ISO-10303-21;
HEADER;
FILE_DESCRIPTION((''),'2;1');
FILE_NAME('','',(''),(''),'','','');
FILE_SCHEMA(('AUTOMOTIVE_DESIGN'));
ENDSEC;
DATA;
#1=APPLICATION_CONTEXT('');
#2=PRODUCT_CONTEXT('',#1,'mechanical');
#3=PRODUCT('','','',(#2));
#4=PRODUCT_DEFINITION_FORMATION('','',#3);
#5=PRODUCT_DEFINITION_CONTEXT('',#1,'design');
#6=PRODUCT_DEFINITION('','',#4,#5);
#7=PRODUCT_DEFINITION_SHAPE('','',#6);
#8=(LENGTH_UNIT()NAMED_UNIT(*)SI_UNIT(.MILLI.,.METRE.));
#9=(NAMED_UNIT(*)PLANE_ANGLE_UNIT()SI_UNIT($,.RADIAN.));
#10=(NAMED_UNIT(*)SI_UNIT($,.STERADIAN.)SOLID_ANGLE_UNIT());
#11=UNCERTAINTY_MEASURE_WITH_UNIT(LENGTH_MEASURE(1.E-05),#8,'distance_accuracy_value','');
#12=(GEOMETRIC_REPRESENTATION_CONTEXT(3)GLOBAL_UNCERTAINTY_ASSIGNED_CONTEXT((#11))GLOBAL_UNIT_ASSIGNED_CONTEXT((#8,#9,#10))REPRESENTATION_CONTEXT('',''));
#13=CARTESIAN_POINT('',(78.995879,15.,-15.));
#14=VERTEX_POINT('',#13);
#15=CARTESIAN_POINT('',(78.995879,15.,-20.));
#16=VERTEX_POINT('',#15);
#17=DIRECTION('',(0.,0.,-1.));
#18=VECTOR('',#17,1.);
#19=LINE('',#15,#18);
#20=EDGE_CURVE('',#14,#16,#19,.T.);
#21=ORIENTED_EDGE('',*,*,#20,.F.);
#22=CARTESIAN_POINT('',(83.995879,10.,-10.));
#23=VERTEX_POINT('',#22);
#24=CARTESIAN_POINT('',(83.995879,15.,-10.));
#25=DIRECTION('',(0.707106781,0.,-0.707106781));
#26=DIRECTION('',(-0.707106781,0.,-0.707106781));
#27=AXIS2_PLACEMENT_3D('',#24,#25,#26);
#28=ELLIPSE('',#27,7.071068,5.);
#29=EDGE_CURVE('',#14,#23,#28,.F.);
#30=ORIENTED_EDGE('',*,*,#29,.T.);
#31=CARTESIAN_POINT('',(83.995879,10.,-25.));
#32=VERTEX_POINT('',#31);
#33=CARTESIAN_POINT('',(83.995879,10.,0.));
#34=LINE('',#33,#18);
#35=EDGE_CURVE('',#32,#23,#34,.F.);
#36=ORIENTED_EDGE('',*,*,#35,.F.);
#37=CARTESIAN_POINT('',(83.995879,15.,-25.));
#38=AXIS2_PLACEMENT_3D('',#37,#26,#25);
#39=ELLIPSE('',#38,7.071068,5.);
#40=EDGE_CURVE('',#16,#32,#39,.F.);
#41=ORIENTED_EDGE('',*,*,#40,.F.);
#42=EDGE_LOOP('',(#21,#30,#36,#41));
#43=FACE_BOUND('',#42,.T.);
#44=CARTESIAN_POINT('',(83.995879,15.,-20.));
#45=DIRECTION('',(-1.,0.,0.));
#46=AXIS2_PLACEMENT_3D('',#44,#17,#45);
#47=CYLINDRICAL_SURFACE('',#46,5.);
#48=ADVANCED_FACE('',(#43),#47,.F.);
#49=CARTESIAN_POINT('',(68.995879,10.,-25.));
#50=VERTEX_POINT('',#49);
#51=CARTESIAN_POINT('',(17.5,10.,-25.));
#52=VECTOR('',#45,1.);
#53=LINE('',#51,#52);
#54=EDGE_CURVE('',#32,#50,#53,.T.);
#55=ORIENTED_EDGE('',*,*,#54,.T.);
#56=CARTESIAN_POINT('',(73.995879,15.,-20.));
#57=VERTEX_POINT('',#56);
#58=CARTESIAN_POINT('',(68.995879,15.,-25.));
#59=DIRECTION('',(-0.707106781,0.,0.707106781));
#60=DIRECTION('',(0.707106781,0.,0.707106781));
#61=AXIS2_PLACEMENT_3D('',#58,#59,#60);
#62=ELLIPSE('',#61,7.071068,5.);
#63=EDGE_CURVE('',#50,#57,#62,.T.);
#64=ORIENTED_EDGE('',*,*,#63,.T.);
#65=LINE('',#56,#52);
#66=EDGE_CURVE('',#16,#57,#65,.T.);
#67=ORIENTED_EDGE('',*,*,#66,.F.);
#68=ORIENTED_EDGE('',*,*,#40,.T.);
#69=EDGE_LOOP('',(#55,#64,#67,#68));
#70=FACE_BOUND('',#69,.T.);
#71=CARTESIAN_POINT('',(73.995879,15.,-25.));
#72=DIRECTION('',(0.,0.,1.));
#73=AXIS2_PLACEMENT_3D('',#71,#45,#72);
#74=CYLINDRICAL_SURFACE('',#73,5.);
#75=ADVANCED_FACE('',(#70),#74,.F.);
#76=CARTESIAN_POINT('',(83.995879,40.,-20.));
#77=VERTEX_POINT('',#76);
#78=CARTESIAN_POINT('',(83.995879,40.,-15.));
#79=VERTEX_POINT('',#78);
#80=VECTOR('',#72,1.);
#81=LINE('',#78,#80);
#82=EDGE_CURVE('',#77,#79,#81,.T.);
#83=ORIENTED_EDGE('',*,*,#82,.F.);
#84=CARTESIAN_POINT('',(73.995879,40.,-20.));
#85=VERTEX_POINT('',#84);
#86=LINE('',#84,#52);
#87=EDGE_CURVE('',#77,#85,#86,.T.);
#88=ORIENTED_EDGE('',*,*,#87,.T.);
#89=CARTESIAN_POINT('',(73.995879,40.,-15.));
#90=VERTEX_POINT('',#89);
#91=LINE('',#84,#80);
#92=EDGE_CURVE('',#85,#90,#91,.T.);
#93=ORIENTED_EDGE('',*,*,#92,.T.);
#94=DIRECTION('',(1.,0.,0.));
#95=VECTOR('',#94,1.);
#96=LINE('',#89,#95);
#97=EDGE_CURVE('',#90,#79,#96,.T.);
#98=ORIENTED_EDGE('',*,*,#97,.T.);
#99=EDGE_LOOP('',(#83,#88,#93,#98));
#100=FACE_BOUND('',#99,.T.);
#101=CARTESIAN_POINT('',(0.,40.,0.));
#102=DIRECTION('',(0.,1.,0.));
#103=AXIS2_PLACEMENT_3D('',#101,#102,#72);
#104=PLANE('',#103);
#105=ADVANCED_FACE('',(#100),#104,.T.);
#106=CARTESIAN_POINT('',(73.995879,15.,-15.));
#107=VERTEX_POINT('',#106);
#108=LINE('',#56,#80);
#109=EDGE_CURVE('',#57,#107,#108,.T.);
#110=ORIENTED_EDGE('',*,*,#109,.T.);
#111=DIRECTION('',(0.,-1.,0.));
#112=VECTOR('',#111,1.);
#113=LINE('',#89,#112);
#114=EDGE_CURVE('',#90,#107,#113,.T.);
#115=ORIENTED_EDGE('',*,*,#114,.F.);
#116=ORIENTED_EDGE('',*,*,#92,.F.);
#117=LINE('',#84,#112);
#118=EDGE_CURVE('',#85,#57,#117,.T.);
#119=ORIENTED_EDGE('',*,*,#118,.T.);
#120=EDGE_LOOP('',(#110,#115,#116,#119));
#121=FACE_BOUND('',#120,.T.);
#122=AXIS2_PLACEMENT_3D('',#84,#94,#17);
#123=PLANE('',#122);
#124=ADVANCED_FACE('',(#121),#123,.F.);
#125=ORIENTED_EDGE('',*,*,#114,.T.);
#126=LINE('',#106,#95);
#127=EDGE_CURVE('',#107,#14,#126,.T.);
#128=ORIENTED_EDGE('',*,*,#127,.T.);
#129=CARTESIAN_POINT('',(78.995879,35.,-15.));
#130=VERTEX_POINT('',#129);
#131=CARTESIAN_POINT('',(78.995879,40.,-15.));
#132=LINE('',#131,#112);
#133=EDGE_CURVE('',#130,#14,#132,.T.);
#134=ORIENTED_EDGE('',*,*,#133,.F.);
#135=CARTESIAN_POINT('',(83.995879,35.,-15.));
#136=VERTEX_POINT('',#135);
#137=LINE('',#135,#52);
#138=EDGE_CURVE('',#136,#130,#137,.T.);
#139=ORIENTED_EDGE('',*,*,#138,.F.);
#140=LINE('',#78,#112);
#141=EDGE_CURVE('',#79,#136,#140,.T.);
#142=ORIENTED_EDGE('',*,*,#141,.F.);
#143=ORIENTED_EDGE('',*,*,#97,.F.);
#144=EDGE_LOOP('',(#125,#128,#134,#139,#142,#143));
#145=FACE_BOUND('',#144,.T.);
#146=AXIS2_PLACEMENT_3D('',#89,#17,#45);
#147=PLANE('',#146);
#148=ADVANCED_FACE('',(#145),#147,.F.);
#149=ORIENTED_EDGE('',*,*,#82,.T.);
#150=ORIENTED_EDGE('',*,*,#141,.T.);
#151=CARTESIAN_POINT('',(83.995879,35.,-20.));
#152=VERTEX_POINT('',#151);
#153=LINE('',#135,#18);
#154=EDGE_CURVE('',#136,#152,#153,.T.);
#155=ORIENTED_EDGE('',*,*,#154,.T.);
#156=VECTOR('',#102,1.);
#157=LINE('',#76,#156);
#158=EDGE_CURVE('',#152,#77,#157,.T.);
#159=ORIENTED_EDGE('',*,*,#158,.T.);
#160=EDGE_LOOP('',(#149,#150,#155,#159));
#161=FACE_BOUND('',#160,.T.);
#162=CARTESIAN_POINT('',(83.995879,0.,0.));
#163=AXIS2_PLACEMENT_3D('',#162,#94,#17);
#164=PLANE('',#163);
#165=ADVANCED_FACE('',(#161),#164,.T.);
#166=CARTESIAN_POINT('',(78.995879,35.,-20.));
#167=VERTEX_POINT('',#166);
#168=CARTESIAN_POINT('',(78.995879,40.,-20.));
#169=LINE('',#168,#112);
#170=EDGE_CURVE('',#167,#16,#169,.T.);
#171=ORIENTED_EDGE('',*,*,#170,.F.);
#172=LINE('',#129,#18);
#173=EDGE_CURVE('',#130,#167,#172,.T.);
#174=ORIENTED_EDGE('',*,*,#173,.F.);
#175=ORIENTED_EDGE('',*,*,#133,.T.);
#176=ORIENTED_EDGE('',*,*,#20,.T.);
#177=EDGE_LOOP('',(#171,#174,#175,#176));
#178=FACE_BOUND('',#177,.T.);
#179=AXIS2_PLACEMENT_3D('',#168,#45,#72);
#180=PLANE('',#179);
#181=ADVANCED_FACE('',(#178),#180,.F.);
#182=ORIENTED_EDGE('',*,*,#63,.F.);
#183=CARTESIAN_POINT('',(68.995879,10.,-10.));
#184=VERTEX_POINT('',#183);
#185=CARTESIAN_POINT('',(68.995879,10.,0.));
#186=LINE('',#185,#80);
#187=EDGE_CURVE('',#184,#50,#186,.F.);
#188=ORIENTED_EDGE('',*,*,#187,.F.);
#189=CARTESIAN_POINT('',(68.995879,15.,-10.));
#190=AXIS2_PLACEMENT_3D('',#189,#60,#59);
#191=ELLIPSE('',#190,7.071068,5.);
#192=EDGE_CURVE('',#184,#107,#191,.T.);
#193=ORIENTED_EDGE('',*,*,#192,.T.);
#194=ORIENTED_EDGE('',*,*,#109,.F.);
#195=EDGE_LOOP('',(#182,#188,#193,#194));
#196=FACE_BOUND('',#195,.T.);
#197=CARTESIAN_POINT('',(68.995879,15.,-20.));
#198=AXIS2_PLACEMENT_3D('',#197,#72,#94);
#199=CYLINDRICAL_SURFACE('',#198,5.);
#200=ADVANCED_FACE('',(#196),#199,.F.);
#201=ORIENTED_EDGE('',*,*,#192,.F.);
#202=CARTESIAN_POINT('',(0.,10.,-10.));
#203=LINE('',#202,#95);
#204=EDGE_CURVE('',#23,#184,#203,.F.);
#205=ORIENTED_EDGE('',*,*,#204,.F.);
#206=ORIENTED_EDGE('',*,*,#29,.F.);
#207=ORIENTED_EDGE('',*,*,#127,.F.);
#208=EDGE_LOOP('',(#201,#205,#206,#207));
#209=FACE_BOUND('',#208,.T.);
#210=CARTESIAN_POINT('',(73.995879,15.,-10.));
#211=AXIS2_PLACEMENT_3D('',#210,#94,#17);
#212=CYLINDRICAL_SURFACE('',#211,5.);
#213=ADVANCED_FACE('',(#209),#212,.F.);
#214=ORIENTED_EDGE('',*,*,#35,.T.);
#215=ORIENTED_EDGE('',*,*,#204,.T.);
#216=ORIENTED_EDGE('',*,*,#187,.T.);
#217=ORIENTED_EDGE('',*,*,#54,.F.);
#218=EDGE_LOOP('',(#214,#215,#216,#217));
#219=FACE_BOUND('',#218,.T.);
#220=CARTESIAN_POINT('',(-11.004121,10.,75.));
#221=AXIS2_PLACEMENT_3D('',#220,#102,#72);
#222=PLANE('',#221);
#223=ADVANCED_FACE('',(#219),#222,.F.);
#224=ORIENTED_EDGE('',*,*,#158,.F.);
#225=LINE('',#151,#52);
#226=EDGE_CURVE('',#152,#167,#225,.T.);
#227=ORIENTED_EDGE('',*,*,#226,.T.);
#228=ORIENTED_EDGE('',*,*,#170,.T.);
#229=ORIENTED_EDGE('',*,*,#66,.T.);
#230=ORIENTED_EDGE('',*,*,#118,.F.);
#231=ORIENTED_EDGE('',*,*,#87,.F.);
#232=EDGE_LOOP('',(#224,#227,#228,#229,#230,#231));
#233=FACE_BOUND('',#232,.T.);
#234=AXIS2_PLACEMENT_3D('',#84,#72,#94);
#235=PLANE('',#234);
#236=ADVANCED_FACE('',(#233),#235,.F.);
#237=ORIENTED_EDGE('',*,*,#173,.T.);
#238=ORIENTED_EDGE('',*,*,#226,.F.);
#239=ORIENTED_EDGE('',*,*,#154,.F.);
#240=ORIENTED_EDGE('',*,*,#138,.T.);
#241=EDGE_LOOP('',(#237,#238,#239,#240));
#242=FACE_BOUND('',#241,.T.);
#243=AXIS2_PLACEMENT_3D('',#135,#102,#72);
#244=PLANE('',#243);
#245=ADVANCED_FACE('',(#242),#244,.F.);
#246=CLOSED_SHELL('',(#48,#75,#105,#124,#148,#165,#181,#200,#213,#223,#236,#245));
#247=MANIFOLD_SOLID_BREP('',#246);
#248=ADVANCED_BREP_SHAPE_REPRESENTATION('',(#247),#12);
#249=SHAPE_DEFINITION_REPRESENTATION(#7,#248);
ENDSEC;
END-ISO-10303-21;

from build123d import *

# Parameters (mm, degrees)
SKETCH1_R           = 5
SKETCH1_R_2         = 10.05
BOSS_EXTRUDE1_DEPTH = 10
SKETCH2_R           = 1.25
CUT_EXTRUDE1_DEPTH  = 10
SKETCH4_R           = 7.5
BOSS_EXTRUDE2_DEPTH = 30
BOSS_EXTRUDE2_TAPER = 7
SKETCH5_R           = 1.25
CUT_EXTRUDE2_DEPTH  = 10
FILLET1_R           = 15
SKETCH6_W           = 5
SKETCH6_H           = 5
BOSS_EXTRUDE3_DEPTH = 30
SKETCH7_W           = 5
SKETCH7_H           = 5
BOSS_EXTRUDE4_DEPTH = 5
FILLET2_R           = 5
SKETCH8_W           = 100
SKETCH8_H           = 10
CUT_EXTRUDE4_DEPTH  = 100


# Some blends are built 0.0001 mm under size
with BuildPart() as part:
    # Sketch1 → Boss-Extrude1 (new body)
    with BuildSketch(Plane(origin=(0, 0, 0), x_dir=(1, 0, 0), z_dir=(0, 1, 0))):
        Polygon((23.995878661, -35), (56.995878661, -35), (56.995878661, -75), (88.995878661, -75), (88.995878661, -25), (88.995878661, 25), (17.5, 25), (-2.004121339, 25), (-2.004121339, 7.840472806), (23.995878661, 7.840472806), (23.995878661, 0), (23.995878661, -28.53803828), (10.495878661, -28.53803828), (10.495878661, -35), align=None)
        with Locations(Location((51.495878661, 0, 0), (0, 0, 270))):
            Circle(SKETCH1_R, mode=Mode.SUBTRACT)
        with Locations(Location((73.995878661, -60, 0), (0, 0, 270))):
            Circle(SKETCH1_R_2, mode=Mode.SUBTRACT)
    extrude(amount=BOSS_EXTRUDE1_DEPTH)

    # Sketch2 → Cut-Extrude1 (cut)
    with BuildSketch(Plane.ZY.offset(-10.495878661)):
        with Locations((31.76901914, 5)):
            Circle(SKETCH2_R)
    extrude(amount=-CUT_EXTRUDE1_DEPTH, mode=Mode.SUBTRACT)

    # Sketch4 → Boss-Extrude2 (add)
    with BuildSketch(Plane(origin=(0, 10, 0), x_dir=(1, 0, 0), z_dir=(0, 1, 0))):
        with Locations((6.495878661, 16.5)):
            Circle(SKETCH4_R)
    extrude(amount=BOSS_EXTRUDE2_DEPTH, taper=BOSS_EXTRUDE2_TAPER)

    # Sketch5 → Cut-Extrude2 (cut)
    with BuildSketch(Plane(origin=(0, 40, 0), x_dir=(1, 0, 0), z_dir=(0, 1, 0))):
        with Locations(Location((6.495878661, 16.5, 0), (0, 0, 270))):
            Circle(SKETCH5_R)
    extrude(amount=-CUT_EXTRUDE2_DEPTH, mode=Mode.SUBTRACT)

    # Fillet1
    # the kernel refuses this fillet: 15 mm, written as the material it adds along each edge
    with BuildSketch(Plane(origin=(56.995878661, 0, 35), x_dir=(-1, 0, 0), z_dir=(0, 1, 0)), Plane(origin=(23.995878661, 0, -7.840472806), x_dir=(-1, 0, 0), z_dir=(0, 1, 0))) as fillet1_piece_1:
        with BuildLine():
            CenterArc((FILLET1_R, FILLET1_R), FILLET1_R, 180, 90)
            Line((0, FILLET1_R), (-FILLET1_R * 0.02, FILLET1_R))
            Line((-FILLET1_R * 0.02, FILLET1_R), (-FILLET1_R * 0.02, -FILLET1_R * 0.02))
            Line((-FILLET1_R * 0.02, -FILLET1_R * 0.02), (FILLET1_R, -FILLET1_R * 0.02))
            Line((FILLET1_R, -FILLET1_R * 0.02), (FILLET1_R, 0))
        make_face()
    extrude(amount=10)
    with BuildSketch(Plane(origin=(23.995878661, 0, 28.53803828), x_dir=(0, 0, -1), z_dir=(0, 1, 0))) as fillet1_piece_2:
        with BuildLine():
            CenterArc((14.924811557, 15), FILLET1_R, 185.739170477, 84.260829523)
            Line((0, 13.5), (-0.298496231, 13.47))
            ThreePointArc((-0.298496231, 13.47), (-0.3, 6.75), (-0.3, 0))
            Line((-0.3, 0), (0, -0.3))
            Line((0, -0.3), (14.924811557, -0.3))
            Line((14.924811557, -0.3), (14.924811557, 0))
        make_face()
    extrude(amount=10)

    # Sketch6 → Boss-Extrude3 (add)
    with BuildSketch(Plane(origin=(0, 10, 0), x_dir=(1, 0, 0), z_dir=(0, 1, 0))):
        with Locations((76.495878661, 17.5)):
            Rectangle(SKETCH6_W, SKETCH6_H)
    extrude(amount=BOSS_EXTRUDE3_DEPTH)

    # Sketch7 → Boss-Extrude4 (add)
    with BuildSketch(Plane(origin=(78.995878661, 0, 0), x_dir=(0, 0, -1), z_dir=(1, 0, 0))):
        with Locations((17.5, 37.5)):
            Rectangle(SKETCH7_W, SKETCH7_H)
    extrude(amount=BOSS_EXTRUDE4_DEPTH)

    # Fillet2
    fillet2_edges = [part.edges().sort_by_distance(p)[0] for p in [
        (78.995878661, 10, -17.5),
        (76.495878661, 10, -20),
        (73.995878661, 10, -17.5),
        (76.495878661, 10, -15),
    ]]
    fillet(fillet2_edges, radius=FILLET2_R - 0.0001)  # a hair under: the kernel refuses the full size

    # Sketch8 → Cut-Extrude4 (cut)
    with BuildSketch(Plane(origin=(88.995878661, 0, 0), x_dir=(0, 0, -1), z_dir=(1, 0, 0))):
        with Locations((-25, 5)):
            Rectangle(SKETCH8_W, SKETCH8_H)
    extrude(amount=-CUT_EXTRUDE4_DEPTH, mode=Mode.SUBTRACT)


with BuildPart() as cut_extrude4_kept_piece:
    # of the separate pieces the step leaves, the one the design keeps (cut_extrude4_pieces_kept)
    add(part.part.solids().sort_by_distance((83.995778661, 10, -24.9999))[0])


solid = cut_extrude4_kept_piece.part
